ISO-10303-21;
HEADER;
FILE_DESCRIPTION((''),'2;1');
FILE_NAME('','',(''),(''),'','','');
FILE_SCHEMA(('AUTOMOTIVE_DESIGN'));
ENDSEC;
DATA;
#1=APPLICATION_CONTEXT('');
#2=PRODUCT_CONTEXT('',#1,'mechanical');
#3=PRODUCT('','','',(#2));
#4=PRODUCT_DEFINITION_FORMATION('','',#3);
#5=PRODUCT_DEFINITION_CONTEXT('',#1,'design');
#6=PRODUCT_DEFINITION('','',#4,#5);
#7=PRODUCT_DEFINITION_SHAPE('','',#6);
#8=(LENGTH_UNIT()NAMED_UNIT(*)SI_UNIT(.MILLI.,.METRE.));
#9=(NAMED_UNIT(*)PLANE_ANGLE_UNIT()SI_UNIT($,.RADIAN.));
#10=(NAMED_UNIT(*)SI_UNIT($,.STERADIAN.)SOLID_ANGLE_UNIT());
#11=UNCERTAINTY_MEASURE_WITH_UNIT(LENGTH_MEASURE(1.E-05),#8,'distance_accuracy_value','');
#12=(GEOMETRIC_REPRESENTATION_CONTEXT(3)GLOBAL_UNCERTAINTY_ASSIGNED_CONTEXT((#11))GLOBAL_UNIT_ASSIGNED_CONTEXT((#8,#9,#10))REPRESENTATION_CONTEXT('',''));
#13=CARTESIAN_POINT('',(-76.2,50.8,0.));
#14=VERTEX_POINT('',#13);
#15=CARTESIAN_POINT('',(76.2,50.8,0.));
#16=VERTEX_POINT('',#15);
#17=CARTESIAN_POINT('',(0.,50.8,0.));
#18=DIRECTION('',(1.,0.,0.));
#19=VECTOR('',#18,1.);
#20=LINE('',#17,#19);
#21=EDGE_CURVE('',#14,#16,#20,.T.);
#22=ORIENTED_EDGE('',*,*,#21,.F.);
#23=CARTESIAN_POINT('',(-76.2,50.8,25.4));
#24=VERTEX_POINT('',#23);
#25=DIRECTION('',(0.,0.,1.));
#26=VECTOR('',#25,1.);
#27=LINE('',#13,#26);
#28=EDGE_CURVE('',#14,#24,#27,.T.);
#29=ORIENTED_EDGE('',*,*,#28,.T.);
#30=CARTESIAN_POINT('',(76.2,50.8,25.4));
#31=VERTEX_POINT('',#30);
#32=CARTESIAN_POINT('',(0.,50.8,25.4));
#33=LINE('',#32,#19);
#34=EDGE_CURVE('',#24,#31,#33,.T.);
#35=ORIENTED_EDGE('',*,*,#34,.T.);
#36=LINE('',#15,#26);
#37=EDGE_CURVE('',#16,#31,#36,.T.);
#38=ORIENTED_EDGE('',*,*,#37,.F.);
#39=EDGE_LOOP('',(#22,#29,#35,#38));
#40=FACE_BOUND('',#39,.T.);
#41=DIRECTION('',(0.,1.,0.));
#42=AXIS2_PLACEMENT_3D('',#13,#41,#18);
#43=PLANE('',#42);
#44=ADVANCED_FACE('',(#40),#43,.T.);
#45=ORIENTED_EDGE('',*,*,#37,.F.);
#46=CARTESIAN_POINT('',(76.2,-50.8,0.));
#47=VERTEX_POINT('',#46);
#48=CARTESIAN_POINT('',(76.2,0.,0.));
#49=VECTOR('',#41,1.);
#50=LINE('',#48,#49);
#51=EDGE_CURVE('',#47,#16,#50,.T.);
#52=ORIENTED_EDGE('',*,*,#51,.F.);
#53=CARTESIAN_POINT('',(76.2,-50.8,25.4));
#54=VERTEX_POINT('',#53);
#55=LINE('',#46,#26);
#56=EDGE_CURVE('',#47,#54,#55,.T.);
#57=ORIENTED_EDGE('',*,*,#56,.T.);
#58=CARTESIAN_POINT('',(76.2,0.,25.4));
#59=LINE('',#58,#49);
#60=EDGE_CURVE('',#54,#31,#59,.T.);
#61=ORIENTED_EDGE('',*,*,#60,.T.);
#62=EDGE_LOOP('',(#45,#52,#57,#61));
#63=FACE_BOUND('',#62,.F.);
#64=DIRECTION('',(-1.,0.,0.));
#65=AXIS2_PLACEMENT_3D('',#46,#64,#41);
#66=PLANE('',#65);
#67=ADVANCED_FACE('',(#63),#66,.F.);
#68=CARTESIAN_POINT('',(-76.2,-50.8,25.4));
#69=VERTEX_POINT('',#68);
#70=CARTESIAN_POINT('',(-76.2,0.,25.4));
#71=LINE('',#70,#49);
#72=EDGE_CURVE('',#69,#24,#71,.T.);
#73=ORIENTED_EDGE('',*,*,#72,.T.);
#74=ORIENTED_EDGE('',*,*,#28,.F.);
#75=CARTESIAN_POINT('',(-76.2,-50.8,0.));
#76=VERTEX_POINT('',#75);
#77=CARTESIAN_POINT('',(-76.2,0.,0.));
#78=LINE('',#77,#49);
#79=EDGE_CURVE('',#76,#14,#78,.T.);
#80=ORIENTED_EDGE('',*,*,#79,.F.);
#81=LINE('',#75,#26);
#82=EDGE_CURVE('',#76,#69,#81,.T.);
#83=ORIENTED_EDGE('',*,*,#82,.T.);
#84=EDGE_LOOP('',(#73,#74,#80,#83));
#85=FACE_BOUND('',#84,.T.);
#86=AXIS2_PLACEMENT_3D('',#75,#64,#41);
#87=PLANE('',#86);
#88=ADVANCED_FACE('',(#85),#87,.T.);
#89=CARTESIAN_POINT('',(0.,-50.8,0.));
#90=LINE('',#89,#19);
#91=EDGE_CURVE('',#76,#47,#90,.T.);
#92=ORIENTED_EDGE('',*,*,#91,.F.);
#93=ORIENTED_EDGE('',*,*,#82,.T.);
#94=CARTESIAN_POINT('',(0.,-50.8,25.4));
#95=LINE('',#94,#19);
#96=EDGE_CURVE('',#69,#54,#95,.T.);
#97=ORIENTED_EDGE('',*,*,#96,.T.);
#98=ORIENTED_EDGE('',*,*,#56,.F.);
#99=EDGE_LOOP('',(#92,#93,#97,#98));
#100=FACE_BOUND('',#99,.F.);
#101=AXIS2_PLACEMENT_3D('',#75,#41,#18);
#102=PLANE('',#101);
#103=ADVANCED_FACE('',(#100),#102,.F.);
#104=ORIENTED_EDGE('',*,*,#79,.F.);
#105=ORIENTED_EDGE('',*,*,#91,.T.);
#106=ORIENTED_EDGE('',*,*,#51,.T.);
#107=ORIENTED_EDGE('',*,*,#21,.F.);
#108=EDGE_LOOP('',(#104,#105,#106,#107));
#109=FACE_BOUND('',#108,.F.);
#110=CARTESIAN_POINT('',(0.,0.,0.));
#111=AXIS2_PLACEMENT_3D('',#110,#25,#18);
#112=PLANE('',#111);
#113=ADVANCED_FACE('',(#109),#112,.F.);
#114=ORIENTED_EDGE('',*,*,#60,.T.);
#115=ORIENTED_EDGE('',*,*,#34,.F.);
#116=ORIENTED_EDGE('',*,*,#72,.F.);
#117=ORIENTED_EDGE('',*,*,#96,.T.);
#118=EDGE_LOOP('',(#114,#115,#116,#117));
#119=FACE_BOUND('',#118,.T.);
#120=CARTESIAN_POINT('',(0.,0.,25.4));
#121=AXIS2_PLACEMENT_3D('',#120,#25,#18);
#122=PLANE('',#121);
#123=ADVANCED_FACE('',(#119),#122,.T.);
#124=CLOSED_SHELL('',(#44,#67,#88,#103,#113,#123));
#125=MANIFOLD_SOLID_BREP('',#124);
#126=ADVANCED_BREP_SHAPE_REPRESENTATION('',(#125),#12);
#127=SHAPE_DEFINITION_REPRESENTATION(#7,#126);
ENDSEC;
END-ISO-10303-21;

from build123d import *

# Parameters (mm, degrees)
F0_W     = 152.4
F0_H     = 101.6
F1_DEPTH = 25.4


# Not quite as in the source:
# - a feature of the source that left no trace in its solid (it failed there, or was rolled back) is left out


with BuildPart() as f1:
    # F0 (on Top) → F1 (new body)
    with BuildSketch(Plane.XY):
        Rectangle(F0_W, F0_H)
    extrude(amount=F1_DEPTH)


solid = f1.part
